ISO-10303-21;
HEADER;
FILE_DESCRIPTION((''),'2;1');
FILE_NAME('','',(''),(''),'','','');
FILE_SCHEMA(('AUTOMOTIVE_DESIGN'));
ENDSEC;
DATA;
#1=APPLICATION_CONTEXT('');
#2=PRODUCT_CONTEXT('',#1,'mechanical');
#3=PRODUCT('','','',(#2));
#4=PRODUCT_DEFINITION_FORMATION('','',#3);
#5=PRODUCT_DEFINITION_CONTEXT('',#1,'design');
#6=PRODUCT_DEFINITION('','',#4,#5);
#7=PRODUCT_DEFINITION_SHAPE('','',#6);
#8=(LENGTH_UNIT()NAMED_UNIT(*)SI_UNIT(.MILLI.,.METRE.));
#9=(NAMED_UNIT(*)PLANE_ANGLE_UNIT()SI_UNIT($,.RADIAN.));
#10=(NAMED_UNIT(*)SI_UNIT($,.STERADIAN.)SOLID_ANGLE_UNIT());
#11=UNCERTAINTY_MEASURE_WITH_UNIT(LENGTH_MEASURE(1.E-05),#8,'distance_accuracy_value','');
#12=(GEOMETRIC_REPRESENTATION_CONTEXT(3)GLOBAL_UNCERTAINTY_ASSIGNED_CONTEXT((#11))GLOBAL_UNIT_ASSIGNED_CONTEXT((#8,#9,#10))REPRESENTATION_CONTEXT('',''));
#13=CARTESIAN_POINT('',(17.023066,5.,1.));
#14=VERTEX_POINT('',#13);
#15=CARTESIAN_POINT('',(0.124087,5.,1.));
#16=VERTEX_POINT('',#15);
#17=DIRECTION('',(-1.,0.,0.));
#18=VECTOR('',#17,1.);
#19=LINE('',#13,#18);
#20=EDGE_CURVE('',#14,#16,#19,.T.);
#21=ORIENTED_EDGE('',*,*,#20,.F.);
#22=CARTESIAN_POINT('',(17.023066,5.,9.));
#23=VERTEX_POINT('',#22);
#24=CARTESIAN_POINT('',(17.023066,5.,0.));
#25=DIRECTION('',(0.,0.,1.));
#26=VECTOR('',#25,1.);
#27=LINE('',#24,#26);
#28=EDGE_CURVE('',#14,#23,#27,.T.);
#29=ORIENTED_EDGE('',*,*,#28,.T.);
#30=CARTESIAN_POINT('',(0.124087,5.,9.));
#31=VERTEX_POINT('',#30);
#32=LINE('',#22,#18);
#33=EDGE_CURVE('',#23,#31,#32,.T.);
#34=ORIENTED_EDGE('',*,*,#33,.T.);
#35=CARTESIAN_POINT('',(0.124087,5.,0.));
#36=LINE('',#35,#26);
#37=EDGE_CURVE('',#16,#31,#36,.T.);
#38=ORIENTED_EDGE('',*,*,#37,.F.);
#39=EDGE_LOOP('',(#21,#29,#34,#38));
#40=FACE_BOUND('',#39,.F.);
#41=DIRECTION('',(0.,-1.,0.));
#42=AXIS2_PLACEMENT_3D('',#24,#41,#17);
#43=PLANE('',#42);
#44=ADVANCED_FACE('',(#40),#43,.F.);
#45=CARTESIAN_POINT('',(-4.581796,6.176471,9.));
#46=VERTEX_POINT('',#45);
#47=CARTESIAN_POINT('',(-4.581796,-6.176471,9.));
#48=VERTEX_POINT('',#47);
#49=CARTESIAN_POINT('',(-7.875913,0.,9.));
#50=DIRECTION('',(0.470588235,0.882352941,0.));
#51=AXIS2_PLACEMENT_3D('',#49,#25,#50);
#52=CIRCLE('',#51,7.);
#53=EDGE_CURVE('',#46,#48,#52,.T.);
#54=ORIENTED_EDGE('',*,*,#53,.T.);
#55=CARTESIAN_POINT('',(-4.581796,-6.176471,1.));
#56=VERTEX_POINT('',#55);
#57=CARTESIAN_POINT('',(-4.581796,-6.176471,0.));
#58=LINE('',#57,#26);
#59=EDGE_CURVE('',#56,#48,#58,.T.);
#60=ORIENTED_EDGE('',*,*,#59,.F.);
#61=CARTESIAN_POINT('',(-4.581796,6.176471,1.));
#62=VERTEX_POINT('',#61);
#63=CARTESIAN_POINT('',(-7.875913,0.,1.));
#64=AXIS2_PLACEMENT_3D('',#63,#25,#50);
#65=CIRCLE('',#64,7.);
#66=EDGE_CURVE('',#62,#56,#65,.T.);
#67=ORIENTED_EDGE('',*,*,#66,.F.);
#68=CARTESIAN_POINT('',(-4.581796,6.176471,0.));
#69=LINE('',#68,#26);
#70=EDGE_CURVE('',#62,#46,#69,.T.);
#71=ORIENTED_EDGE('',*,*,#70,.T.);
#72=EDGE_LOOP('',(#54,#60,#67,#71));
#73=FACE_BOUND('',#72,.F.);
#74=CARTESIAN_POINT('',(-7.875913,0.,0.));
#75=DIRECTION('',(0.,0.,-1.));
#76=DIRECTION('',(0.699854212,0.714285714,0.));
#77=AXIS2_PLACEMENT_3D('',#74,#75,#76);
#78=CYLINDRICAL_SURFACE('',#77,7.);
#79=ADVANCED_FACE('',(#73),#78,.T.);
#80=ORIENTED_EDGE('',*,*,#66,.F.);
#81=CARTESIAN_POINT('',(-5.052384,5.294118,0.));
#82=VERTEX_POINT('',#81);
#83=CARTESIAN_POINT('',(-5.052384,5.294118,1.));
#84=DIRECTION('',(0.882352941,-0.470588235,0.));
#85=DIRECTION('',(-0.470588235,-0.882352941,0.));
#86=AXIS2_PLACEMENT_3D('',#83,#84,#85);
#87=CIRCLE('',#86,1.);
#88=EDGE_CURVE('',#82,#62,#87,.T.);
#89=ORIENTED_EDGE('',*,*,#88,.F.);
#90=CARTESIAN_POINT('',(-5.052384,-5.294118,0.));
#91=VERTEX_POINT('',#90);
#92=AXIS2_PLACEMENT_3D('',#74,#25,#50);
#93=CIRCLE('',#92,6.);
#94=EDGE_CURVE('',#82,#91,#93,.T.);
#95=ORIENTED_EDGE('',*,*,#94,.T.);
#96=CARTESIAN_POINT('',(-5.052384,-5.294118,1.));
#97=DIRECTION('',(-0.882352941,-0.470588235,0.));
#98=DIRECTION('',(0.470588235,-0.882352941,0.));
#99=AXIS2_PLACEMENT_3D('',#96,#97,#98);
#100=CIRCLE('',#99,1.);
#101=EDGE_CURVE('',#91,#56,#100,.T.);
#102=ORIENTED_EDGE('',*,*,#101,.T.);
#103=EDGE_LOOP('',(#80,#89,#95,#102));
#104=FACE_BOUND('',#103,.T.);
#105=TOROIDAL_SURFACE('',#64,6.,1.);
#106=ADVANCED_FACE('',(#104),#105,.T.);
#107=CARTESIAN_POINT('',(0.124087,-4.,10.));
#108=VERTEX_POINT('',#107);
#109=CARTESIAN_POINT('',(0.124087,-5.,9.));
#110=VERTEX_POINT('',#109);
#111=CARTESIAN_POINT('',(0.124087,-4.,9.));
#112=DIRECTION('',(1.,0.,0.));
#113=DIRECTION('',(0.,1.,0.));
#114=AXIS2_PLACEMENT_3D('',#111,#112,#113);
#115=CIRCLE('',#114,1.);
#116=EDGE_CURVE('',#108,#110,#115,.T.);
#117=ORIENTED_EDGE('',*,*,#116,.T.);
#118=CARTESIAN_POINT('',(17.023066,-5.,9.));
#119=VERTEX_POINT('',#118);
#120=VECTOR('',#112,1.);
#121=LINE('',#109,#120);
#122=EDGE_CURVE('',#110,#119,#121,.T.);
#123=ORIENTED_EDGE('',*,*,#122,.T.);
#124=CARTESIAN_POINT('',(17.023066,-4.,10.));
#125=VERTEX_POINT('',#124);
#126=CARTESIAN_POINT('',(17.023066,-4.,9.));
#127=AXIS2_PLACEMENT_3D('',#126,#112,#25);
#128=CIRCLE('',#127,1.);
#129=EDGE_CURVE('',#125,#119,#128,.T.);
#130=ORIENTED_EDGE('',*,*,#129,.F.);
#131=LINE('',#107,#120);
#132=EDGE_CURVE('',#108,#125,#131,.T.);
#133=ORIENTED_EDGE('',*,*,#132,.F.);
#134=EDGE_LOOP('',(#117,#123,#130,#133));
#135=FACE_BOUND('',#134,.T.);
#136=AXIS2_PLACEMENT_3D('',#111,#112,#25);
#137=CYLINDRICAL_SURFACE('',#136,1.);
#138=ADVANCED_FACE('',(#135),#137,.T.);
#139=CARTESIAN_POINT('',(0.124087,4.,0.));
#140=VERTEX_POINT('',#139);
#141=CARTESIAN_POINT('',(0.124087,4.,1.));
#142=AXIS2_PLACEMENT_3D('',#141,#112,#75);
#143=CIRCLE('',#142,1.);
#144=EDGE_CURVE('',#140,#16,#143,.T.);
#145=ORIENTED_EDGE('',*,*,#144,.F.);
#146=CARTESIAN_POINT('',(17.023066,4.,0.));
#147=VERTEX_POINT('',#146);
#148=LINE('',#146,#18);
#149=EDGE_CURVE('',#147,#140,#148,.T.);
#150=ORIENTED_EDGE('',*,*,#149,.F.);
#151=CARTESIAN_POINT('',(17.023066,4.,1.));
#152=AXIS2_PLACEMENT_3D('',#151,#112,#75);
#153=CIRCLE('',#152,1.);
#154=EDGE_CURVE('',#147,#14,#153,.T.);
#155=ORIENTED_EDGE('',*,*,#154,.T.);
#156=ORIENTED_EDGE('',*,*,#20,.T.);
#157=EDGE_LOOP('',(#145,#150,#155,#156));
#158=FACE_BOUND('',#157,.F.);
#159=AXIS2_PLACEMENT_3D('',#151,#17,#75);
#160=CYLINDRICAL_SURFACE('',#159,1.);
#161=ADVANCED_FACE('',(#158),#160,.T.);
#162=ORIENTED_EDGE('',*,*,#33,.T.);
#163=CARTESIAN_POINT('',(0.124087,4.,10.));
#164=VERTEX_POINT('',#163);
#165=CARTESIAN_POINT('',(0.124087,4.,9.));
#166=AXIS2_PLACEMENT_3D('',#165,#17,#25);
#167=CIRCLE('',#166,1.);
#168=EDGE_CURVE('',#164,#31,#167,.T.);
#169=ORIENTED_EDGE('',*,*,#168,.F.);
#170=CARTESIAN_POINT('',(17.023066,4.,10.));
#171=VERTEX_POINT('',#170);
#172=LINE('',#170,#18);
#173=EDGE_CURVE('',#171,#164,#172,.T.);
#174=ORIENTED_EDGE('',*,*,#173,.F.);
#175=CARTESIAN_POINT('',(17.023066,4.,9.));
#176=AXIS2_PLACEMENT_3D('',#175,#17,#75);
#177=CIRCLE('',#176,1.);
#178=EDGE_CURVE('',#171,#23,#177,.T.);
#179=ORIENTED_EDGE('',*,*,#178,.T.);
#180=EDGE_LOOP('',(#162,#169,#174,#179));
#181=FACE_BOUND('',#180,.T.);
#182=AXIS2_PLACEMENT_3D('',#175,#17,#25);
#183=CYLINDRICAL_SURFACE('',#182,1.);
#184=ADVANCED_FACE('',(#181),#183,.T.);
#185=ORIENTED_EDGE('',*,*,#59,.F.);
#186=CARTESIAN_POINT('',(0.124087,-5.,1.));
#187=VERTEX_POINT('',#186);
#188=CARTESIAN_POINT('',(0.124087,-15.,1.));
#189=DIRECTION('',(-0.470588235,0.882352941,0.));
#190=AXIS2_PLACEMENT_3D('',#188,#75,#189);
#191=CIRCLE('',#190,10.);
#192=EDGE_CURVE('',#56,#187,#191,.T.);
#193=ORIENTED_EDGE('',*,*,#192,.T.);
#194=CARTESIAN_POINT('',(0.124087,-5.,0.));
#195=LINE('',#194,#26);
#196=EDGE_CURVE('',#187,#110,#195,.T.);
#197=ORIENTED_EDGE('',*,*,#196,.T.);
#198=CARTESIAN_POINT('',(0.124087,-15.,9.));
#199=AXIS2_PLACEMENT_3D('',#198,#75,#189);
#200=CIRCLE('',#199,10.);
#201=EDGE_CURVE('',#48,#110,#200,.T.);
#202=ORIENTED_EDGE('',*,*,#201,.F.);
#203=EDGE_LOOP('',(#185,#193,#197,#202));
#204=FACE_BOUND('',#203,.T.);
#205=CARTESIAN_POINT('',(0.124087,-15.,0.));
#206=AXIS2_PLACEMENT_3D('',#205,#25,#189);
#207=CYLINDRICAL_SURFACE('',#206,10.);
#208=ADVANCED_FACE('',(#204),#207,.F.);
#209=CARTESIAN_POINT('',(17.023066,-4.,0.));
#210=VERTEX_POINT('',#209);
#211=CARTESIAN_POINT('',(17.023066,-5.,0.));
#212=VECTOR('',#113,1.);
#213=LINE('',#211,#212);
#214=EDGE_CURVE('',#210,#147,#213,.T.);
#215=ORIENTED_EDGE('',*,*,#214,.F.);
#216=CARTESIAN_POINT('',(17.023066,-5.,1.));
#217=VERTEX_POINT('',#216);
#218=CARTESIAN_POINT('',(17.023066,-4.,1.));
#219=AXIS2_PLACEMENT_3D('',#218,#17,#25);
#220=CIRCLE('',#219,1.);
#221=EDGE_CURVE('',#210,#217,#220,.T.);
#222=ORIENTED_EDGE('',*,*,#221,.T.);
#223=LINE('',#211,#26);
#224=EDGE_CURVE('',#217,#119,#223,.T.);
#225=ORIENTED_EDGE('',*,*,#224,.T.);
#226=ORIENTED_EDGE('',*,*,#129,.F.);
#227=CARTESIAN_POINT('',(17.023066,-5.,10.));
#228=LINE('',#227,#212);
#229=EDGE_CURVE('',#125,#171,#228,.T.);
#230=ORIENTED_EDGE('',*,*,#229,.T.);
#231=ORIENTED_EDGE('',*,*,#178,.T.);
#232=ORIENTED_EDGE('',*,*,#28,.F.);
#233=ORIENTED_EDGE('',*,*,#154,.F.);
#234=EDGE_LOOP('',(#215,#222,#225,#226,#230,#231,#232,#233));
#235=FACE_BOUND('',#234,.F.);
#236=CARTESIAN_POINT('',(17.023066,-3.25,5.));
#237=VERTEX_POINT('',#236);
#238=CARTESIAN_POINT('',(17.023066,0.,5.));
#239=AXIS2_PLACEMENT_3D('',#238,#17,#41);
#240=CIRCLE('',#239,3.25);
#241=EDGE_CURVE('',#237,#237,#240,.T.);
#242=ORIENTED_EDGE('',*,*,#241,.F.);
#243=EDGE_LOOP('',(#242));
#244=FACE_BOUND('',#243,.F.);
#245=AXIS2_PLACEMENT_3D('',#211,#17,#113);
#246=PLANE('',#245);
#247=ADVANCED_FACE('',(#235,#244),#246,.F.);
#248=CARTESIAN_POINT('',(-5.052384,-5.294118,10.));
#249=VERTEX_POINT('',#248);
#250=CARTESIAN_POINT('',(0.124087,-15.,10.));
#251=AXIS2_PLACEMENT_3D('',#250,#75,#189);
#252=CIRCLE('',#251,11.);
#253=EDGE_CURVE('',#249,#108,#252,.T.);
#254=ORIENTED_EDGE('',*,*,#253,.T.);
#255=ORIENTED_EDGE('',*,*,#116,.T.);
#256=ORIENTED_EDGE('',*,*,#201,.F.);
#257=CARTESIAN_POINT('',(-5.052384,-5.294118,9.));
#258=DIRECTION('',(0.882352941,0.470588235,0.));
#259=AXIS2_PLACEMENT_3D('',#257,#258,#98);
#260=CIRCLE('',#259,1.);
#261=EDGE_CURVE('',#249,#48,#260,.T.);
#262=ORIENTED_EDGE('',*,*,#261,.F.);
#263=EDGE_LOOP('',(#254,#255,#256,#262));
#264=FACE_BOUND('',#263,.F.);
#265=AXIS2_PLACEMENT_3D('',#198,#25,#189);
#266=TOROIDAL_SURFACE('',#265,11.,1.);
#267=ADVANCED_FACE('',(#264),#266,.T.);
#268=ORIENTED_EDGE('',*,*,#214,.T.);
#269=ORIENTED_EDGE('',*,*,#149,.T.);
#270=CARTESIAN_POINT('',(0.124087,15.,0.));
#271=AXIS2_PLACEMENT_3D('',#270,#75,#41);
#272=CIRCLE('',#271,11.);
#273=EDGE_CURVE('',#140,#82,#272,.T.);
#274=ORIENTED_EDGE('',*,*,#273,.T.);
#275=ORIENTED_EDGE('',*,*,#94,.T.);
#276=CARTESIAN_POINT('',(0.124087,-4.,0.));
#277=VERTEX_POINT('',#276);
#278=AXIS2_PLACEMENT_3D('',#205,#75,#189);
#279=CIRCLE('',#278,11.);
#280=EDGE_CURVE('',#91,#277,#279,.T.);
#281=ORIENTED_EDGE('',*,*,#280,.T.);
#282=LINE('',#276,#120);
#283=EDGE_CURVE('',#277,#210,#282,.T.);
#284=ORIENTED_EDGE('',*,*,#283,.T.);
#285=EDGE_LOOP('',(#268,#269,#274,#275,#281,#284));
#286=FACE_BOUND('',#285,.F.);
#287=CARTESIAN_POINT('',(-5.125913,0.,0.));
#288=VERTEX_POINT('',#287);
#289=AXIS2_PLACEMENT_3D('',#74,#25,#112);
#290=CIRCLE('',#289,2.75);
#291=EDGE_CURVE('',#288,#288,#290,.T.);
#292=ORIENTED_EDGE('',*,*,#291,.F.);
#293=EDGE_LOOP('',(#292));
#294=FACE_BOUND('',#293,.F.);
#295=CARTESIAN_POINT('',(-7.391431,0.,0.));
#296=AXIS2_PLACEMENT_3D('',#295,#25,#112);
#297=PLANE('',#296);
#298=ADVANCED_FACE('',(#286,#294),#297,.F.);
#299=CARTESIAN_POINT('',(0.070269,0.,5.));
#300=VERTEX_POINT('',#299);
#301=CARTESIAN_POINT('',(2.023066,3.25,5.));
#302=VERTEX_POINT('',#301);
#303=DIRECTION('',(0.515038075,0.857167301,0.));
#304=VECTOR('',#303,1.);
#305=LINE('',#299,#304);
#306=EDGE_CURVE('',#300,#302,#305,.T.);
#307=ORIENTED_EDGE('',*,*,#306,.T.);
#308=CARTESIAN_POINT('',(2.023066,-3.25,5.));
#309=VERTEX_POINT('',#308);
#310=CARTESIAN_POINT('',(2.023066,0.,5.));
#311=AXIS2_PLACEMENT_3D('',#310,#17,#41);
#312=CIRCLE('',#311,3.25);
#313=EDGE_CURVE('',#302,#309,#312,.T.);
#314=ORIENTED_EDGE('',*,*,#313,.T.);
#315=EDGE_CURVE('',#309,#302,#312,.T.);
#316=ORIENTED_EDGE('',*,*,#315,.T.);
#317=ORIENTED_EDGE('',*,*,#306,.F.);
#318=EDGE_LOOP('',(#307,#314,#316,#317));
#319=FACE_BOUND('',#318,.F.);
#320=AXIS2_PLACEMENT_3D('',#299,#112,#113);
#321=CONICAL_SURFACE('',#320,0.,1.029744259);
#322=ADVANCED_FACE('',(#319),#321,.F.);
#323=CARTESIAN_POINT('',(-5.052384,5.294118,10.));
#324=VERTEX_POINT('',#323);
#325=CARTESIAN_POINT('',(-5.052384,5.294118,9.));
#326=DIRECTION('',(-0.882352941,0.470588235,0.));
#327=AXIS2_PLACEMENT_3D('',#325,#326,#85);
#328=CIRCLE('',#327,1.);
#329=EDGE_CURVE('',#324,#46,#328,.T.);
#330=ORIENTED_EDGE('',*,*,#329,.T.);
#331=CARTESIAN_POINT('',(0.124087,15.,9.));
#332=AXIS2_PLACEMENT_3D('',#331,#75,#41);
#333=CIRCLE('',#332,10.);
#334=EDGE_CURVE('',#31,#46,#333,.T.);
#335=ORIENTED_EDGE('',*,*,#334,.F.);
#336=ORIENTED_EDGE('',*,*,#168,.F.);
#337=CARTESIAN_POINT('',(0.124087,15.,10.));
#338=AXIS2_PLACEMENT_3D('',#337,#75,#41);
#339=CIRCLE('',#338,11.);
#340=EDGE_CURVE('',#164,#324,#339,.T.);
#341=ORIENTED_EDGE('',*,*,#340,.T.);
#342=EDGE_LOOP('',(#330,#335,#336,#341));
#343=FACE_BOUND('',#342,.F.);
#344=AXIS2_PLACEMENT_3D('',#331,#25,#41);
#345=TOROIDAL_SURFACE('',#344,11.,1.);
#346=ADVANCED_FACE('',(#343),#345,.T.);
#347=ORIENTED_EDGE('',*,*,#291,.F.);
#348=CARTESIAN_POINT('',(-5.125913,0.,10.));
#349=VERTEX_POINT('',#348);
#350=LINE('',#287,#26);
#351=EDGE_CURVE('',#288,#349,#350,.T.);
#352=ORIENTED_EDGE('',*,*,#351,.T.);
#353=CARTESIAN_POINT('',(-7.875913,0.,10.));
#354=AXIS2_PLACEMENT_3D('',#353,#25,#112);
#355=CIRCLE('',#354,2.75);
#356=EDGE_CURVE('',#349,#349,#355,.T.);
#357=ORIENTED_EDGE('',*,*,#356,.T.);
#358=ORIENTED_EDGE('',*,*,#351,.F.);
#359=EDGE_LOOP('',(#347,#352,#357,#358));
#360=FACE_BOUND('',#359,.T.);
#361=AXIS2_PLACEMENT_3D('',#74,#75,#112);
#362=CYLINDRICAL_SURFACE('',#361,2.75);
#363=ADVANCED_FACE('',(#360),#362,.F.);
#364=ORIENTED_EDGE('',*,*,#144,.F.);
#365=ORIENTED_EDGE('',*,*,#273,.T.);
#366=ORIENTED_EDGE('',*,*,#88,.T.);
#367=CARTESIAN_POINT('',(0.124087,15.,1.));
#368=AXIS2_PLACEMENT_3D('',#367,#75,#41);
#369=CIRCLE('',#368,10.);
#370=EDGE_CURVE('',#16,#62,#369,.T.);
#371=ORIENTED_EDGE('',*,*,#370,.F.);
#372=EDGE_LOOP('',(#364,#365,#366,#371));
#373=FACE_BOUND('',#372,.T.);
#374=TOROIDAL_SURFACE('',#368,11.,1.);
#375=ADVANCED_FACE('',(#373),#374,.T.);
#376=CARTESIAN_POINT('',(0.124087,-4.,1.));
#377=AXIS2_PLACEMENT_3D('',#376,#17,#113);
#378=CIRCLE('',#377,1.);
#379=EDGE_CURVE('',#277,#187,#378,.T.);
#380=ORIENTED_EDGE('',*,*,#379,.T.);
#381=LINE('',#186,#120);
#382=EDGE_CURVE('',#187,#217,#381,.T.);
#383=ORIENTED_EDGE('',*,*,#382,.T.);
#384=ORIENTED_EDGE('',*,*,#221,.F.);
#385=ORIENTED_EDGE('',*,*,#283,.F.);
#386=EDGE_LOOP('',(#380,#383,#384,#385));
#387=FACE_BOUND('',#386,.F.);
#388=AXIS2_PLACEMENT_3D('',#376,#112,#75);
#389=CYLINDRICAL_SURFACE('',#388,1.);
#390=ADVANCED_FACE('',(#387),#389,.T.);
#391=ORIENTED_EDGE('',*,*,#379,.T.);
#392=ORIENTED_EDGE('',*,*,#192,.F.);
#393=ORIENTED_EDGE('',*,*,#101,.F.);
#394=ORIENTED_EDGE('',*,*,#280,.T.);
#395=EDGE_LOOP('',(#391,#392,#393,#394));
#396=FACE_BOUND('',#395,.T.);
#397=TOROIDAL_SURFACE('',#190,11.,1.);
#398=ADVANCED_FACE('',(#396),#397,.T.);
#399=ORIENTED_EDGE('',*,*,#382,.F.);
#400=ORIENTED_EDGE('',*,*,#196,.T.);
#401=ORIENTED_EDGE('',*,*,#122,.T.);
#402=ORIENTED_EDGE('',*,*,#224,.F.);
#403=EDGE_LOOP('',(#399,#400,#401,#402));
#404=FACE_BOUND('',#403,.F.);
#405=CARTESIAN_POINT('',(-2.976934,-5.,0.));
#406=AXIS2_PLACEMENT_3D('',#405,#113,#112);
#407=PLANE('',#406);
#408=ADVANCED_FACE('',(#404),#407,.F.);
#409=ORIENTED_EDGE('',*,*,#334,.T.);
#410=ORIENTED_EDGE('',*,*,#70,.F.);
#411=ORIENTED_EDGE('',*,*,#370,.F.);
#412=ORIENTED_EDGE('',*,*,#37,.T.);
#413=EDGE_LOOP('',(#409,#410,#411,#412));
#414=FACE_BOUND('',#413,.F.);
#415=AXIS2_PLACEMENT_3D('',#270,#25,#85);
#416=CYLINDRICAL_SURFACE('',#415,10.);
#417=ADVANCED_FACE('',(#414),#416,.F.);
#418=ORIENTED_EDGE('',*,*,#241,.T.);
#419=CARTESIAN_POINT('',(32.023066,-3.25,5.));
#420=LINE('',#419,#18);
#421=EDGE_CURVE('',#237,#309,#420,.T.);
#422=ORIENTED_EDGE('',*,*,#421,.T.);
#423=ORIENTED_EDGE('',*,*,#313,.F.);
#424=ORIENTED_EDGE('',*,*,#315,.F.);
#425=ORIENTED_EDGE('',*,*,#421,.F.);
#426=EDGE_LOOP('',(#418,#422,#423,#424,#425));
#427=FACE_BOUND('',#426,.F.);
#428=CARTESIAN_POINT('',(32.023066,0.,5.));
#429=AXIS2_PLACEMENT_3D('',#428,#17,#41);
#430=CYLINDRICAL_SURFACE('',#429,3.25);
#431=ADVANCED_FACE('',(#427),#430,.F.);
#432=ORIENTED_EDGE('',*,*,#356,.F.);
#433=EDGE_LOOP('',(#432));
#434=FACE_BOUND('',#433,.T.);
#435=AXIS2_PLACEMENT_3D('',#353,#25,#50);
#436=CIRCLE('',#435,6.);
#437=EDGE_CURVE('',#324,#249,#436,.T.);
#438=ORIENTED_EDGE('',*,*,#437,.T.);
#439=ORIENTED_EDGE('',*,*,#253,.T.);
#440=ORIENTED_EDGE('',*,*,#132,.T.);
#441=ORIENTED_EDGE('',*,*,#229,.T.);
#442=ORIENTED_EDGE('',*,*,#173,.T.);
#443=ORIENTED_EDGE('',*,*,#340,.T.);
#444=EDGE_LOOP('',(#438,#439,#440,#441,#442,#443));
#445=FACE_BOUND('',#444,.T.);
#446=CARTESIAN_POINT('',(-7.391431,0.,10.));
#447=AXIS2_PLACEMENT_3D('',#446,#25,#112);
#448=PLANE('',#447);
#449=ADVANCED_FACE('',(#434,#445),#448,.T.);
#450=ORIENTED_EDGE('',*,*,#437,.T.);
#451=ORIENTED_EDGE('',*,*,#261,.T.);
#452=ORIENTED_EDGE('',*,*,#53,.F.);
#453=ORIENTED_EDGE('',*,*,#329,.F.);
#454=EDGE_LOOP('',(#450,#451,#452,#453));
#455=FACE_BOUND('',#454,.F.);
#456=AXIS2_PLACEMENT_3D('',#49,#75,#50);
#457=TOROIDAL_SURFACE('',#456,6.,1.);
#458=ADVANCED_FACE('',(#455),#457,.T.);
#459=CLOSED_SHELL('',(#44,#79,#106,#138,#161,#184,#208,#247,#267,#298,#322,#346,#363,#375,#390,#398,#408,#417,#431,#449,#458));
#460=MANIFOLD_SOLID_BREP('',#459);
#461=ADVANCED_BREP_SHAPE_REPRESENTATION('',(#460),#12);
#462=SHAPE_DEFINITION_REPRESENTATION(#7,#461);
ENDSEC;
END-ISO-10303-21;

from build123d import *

# Parameters (mm, degrees)
F0_R     = 2.75
F1_DEPTH = 10
F2_R     = 10
F3_R     = 1
F5_D     = 6.5
F5_DEPTH = 15
F5_TIP   = 1.9527970118


# Not quite as in the source:
# - a feature names something its author has since deleted; it is built from what else it names


with BuildPart() as f1:
    # F0 (on Top) → F1 (new body)
    with BuildSketch(Plane.XY):
        with BuildLine():
            ThreePointArc((-2.9769337647, -5), (-1.4225088619, -2.7117470016), (-0.8759132502, 0))
            ThreePointArc((-0.8759132502, 0), (-1.4225088619, 2.7117470016), (-2.9769337647, 5))
            ThreePointArc((-2.9769337647, 5), (-14.8759132502, 0), (-2.9769337647, -5))
        make_face()
        with Locations((-7.8759132502, 0)):
            Circle(F0_R, mode=Mode.SUBTRACT)
        with BuildLine():
            ThreePointArc((-2.9769337647, 5), (-1.4225088619, 2.7117470016), (-0.8759132502, 0))
            ThreePointArc((-0.8759132502, 0), (-1.4225088619, -2.7117470016), (-2.9769337647, -5))
            Line((-2.9769337647, -5), (17.0230662353, -5))
            Line((17.0230662353, -5), (17.0230662353, 5))
            Line((17.0230662353, 5), (-2.9769337647, 5))
        make_face()
    extrude(amount=F1_DEPTH)

    # F2
    f2_edges = [f1.edges().sort_by_distance(p)[0] for p in [
        (-2.976934, 5, 5),
        (-2.976934, -5, 5),
    ]]
    fillet(f2_edges, radius=F2_R)

    # F3
    f3_edges = [f1.edges().sort_by_distance(p)[0] for p in [
        (8.573576, 5, 10),
        (-2.30127, 5.298575, 10),
        (8.573576, 5, 0),
    ]]
    fillet(f3_edges, radius=F3_R)

    # F5
    with Locations(Plane.YZ.offset(17.0230662353)):
        with Locations((0, 5)):
            Hole(F5_D / 2, depth=F5_DEPTH)
            with Locations((0, 0, -(F5_DEPTH + F5_TIP / 2))):  # 118° drill point
                Cone(0, F5_D / 2, F5_TIP, mode=Mode.SUBTRACT)


solid = f1.part
